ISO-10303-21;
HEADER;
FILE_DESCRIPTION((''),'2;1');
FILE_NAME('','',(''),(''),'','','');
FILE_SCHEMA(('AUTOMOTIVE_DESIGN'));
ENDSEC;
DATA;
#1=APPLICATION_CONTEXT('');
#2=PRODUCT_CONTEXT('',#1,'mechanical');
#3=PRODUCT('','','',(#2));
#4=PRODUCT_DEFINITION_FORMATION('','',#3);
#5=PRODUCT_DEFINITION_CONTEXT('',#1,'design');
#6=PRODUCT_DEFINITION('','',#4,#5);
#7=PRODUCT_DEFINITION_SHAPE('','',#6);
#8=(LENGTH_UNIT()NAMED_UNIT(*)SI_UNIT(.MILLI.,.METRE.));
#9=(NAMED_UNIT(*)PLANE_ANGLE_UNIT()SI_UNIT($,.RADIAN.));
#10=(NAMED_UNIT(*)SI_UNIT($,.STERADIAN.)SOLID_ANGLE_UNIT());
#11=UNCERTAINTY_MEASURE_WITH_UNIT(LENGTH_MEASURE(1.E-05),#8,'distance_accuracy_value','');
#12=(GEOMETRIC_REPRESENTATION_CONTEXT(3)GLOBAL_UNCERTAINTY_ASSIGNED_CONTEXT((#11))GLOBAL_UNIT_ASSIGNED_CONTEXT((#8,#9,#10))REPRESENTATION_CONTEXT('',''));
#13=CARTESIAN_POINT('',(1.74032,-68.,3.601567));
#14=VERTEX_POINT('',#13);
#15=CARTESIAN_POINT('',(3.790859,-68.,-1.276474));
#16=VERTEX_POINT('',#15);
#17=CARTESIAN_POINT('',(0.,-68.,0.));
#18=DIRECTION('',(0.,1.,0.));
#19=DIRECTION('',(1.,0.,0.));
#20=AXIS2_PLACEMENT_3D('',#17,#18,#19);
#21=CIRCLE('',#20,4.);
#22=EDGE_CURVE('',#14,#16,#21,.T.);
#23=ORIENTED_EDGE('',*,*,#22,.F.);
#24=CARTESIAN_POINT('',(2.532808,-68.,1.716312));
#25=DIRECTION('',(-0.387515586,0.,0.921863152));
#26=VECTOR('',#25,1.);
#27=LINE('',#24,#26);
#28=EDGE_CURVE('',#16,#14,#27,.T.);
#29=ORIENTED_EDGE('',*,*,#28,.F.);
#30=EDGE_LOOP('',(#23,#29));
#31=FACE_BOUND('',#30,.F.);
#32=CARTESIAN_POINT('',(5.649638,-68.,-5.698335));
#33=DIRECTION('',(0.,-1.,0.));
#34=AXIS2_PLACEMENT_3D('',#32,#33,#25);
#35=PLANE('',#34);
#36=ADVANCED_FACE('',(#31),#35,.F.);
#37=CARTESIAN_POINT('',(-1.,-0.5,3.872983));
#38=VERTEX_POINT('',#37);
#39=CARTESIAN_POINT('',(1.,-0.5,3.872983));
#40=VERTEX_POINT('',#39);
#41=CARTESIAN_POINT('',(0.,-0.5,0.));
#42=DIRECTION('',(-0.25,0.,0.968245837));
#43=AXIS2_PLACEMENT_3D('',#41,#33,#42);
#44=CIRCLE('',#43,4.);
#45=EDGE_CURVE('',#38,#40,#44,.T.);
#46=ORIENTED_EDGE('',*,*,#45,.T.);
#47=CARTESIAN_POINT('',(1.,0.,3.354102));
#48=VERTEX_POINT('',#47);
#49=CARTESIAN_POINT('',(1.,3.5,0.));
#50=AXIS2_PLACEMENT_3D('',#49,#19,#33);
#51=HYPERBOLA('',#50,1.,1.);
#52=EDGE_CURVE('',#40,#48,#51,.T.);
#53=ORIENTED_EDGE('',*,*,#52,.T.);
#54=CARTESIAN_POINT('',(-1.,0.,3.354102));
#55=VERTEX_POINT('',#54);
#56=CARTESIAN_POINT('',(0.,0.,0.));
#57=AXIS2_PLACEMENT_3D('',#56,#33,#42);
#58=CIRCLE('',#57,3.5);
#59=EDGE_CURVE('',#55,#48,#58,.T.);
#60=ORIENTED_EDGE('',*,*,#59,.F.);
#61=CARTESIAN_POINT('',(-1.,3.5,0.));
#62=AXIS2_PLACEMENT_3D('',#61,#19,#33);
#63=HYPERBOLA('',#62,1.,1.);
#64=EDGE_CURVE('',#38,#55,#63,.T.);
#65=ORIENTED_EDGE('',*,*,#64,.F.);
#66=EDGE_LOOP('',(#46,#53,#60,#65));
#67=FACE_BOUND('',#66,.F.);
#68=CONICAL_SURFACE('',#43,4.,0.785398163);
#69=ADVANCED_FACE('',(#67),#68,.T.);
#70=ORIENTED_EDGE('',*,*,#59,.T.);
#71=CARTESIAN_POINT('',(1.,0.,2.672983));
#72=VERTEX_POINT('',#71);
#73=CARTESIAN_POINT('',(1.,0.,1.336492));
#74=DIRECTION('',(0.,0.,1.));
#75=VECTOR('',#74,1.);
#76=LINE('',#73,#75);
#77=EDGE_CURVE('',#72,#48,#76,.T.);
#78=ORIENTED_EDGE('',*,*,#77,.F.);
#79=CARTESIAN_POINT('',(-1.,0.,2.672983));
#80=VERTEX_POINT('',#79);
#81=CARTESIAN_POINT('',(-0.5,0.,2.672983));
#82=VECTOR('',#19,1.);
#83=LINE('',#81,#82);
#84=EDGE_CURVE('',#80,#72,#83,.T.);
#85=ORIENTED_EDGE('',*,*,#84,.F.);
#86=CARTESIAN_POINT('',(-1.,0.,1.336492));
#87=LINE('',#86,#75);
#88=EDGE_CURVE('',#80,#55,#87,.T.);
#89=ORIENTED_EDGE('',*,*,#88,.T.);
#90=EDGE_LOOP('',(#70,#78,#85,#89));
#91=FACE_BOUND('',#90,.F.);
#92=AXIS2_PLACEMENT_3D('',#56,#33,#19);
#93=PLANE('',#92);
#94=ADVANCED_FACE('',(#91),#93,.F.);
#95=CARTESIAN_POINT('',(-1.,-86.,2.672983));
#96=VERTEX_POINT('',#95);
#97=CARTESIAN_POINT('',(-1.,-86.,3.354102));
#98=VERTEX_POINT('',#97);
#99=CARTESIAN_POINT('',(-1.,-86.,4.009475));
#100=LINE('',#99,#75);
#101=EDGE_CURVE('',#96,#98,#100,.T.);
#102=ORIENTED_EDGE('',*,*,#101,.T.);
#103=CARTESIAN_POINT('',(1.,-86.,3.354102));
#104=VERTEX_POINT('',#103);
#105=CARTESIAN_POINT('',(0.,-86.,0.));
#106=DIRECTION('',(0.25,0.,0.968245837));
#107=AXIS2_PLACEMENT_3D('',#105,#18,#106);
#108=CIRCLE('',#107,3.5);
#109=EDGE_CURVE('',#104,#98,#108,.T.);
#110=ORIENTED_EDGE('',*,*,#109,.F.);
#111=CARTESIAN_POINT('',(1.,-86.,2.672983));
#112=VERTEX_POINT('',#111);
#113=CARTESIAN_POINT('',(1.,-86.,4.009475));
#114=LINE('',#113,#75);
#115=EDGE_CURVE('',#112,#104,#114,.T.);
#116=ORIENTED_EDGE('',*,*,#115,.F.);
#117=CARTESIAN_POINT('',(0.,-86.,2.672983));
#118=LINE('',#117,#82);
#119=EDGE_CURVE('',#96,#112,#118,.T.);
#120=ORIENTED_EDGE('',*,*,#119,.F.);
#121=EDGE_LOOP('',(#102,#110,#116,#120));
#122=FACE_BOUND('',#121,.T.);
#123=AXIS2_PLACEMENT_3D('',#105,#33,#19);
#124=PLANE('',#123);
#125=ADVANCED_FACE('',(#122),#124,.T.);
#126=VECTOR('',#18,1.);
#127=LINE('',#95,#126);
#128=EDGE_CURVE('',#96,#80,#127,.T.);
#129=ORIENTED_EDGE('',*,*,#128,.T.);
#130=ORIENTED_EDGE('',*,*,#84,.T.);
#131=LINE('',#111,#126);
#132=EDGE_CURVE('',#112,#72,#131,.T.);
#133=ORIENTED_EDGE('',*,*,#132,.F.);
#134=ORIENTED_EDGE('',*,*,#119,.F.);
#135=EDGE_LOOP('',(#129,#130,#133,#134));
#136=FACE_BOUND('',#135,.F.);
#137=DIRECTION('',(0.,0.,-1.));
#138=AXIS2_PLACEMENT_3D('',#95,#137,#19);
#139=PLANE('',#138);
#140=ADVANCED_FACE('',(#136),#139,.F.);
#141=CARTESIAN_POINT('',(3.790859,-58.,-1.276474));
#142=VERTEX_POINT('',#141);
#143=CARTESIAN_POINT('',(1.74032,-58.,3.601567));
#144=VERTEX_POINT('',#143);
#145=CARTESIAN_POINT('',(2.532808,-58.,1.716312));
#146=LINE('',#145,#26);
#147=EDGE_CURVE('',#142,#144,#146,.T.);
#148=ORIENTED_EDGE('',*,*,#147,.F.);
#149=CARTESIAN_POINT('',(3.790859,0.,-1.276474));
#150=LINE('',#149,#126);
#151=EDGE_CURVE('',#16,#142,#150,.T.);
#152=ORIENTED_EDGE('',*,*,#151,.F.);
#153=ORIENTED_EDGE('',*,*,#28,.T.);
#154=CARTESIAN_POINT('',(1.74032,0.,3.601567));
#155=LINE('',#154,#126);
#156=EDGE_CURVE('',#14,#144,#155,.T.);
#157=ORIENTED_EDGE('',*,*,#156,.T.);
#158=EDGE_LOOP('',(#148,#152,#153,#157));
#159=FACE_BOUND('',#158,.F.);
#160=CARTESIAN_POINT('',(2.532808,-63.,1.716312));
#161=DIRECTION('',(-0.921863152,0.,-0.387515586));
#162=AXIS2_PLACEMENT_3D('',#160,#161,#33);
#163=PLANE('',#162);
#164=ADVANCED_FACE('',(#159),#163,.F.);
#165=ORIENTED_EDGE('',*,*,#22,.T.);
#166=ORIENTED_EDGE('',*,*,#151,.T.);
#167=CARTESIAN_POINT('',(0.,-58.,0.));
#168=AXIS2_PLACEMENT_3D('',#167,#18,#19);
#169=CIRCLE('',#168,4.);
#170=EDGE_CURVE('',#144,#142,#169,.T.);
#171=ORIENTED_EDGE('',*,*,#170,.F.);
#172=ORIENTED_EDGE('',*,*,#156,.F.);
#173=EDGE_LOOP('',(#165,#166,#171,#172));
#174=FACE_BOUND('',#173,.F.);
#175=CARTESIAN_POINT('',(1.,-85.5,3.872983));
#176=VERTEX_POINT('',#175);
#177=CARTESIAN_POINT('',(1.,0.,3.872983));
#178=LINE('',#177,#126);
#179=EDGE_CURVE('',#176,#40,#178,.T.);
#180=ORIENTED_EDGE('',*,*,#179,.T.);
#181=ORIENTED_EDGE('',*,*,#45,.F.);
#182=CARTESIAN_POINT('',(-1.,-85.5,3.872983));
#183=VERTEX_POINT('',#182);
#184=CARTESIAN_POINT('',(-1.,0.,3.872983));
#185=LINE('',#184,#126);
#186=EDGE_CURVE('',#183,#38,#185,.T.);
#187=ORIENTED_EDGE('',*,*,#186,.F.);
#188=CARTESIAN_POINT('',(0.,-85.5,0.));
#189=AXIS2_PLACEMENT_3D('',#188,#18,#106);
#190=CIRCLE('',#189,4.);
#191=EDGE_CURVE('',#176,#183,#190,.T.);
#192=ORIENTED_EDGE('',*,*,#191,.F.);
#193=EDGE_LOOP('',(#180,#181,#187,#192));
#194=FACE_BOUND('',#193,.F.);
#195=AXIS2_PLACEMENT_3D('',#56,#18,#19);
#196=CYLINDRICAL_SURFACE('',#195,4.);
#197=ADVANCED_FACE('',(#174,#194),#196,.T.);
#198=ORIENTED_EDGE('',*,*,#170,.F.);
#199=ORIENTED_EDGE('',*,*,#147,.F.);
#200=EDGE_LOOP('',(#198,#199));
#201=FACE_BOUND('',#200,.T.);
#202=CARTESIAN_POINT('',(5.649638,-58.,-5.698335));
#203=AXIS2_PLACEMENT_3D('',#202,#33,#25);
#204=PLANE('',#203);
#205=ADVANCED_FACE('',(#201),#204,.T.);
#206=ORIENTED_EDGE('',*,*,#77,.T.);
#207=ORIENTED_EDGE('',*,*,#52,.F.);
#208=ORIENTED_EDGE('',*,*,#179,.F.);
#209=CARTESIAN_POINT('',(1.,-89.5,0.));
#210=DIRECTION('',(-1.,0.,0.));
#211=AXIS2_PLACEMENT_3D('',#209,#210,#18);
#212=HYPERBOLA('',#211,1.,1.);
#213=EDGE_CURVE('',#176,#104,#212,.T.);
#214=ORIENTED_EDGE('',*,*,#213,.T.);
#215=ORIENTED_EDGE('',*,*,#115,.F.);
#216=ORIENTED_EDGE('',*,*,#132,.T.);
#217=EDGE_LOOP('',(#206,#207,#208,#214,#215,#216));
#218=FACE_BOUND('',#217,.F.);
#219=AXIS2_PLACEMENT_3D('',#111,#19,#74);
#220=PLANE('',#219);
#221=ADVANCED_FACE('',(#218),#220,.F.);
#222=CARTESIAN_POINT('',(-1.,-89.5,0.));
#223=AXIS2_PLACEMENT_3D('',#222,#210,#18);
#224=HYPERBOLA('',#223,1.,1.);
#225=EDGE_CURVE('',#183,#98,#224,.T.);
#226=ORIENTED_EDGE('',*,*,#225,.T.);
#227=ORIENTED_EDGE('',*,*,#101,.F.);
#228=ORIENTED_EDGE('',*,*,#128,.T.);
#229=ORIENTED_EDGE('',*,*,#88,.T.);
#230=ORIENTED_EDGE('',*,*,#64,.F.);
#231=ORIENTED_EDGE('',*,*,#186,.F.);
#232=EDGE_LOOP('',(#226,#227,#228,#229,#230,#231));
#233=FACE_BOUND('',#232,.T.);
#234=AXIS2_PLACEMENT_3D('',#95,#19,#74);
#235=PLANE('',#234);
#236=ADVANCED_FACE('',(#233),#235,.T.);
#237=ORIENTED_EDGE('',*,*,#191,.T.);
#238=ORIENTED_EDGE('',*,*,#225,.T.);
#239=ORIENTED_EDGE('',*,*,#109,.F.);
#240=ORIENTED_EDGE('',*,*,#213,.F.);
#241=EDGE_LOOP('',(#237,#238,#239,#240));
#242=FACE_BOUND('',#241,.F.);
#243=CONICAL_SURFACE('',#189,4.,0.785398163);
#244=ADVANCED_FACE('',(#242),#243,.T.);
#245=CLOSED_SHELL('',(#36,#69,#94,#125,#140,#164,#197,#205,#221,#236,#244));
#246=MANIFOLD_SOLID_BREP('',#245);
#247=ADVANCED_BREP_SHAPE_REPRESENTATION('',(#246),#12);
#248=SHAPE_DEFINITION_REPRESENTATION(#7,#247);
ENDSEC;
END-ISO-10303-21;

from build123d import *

# Parameters (mm, degrees)
F0_R     = 4
F1_DEPTH = 86
F2_W     = 2
F2_H     = 2.6729833462
F3_DEPTH = 86.001
F4_SIZE  = 0.5
F7_W     = 10
F7_H     = 16.0862193677
F8_DEPTH = 2.1892940191


with BuildPart() as f1:
    # F0 (on Front) → F1 (new body)
    with BuildSketch(Plane.XZ):
        Circle(F0_R)
    extrude(amount=F1_DEPTH)

    # F2 (on face) → F3 (cut, through all)
    with BuildSketch(Plane.XZ.offset(86)):
        with Locations((0, 4.0094750193)):
            Rectangle(F2_W, F2_H)
    extrude(amount=-F3_DEPTH, mode=Mode.SUBTRACT)

    # F4
    f4_edges = [f1.edges().sort_by_distance(p)[0] for p in [
        (0, -86, -4),
        (0, 0, -4),
    ]]
    chamfer(f4_edges, length=F4_SIZE)

    # F7 (on face) → F8 (cut, through all)
    with BuildSketch(Plane(origin=(2.7655894548, 0, 1.1625467594), x_dir=(0, -1, 0), z_dir=(-0.9218631516, 0, -0.3875155865))):
        with Locations((63, 0.6007021293)):
            Rectangle(F7_W, F7_H)
    extrude(amount=-F8_DEPTH, mode=Mode.SUBTRACT)


solid = f1.part
